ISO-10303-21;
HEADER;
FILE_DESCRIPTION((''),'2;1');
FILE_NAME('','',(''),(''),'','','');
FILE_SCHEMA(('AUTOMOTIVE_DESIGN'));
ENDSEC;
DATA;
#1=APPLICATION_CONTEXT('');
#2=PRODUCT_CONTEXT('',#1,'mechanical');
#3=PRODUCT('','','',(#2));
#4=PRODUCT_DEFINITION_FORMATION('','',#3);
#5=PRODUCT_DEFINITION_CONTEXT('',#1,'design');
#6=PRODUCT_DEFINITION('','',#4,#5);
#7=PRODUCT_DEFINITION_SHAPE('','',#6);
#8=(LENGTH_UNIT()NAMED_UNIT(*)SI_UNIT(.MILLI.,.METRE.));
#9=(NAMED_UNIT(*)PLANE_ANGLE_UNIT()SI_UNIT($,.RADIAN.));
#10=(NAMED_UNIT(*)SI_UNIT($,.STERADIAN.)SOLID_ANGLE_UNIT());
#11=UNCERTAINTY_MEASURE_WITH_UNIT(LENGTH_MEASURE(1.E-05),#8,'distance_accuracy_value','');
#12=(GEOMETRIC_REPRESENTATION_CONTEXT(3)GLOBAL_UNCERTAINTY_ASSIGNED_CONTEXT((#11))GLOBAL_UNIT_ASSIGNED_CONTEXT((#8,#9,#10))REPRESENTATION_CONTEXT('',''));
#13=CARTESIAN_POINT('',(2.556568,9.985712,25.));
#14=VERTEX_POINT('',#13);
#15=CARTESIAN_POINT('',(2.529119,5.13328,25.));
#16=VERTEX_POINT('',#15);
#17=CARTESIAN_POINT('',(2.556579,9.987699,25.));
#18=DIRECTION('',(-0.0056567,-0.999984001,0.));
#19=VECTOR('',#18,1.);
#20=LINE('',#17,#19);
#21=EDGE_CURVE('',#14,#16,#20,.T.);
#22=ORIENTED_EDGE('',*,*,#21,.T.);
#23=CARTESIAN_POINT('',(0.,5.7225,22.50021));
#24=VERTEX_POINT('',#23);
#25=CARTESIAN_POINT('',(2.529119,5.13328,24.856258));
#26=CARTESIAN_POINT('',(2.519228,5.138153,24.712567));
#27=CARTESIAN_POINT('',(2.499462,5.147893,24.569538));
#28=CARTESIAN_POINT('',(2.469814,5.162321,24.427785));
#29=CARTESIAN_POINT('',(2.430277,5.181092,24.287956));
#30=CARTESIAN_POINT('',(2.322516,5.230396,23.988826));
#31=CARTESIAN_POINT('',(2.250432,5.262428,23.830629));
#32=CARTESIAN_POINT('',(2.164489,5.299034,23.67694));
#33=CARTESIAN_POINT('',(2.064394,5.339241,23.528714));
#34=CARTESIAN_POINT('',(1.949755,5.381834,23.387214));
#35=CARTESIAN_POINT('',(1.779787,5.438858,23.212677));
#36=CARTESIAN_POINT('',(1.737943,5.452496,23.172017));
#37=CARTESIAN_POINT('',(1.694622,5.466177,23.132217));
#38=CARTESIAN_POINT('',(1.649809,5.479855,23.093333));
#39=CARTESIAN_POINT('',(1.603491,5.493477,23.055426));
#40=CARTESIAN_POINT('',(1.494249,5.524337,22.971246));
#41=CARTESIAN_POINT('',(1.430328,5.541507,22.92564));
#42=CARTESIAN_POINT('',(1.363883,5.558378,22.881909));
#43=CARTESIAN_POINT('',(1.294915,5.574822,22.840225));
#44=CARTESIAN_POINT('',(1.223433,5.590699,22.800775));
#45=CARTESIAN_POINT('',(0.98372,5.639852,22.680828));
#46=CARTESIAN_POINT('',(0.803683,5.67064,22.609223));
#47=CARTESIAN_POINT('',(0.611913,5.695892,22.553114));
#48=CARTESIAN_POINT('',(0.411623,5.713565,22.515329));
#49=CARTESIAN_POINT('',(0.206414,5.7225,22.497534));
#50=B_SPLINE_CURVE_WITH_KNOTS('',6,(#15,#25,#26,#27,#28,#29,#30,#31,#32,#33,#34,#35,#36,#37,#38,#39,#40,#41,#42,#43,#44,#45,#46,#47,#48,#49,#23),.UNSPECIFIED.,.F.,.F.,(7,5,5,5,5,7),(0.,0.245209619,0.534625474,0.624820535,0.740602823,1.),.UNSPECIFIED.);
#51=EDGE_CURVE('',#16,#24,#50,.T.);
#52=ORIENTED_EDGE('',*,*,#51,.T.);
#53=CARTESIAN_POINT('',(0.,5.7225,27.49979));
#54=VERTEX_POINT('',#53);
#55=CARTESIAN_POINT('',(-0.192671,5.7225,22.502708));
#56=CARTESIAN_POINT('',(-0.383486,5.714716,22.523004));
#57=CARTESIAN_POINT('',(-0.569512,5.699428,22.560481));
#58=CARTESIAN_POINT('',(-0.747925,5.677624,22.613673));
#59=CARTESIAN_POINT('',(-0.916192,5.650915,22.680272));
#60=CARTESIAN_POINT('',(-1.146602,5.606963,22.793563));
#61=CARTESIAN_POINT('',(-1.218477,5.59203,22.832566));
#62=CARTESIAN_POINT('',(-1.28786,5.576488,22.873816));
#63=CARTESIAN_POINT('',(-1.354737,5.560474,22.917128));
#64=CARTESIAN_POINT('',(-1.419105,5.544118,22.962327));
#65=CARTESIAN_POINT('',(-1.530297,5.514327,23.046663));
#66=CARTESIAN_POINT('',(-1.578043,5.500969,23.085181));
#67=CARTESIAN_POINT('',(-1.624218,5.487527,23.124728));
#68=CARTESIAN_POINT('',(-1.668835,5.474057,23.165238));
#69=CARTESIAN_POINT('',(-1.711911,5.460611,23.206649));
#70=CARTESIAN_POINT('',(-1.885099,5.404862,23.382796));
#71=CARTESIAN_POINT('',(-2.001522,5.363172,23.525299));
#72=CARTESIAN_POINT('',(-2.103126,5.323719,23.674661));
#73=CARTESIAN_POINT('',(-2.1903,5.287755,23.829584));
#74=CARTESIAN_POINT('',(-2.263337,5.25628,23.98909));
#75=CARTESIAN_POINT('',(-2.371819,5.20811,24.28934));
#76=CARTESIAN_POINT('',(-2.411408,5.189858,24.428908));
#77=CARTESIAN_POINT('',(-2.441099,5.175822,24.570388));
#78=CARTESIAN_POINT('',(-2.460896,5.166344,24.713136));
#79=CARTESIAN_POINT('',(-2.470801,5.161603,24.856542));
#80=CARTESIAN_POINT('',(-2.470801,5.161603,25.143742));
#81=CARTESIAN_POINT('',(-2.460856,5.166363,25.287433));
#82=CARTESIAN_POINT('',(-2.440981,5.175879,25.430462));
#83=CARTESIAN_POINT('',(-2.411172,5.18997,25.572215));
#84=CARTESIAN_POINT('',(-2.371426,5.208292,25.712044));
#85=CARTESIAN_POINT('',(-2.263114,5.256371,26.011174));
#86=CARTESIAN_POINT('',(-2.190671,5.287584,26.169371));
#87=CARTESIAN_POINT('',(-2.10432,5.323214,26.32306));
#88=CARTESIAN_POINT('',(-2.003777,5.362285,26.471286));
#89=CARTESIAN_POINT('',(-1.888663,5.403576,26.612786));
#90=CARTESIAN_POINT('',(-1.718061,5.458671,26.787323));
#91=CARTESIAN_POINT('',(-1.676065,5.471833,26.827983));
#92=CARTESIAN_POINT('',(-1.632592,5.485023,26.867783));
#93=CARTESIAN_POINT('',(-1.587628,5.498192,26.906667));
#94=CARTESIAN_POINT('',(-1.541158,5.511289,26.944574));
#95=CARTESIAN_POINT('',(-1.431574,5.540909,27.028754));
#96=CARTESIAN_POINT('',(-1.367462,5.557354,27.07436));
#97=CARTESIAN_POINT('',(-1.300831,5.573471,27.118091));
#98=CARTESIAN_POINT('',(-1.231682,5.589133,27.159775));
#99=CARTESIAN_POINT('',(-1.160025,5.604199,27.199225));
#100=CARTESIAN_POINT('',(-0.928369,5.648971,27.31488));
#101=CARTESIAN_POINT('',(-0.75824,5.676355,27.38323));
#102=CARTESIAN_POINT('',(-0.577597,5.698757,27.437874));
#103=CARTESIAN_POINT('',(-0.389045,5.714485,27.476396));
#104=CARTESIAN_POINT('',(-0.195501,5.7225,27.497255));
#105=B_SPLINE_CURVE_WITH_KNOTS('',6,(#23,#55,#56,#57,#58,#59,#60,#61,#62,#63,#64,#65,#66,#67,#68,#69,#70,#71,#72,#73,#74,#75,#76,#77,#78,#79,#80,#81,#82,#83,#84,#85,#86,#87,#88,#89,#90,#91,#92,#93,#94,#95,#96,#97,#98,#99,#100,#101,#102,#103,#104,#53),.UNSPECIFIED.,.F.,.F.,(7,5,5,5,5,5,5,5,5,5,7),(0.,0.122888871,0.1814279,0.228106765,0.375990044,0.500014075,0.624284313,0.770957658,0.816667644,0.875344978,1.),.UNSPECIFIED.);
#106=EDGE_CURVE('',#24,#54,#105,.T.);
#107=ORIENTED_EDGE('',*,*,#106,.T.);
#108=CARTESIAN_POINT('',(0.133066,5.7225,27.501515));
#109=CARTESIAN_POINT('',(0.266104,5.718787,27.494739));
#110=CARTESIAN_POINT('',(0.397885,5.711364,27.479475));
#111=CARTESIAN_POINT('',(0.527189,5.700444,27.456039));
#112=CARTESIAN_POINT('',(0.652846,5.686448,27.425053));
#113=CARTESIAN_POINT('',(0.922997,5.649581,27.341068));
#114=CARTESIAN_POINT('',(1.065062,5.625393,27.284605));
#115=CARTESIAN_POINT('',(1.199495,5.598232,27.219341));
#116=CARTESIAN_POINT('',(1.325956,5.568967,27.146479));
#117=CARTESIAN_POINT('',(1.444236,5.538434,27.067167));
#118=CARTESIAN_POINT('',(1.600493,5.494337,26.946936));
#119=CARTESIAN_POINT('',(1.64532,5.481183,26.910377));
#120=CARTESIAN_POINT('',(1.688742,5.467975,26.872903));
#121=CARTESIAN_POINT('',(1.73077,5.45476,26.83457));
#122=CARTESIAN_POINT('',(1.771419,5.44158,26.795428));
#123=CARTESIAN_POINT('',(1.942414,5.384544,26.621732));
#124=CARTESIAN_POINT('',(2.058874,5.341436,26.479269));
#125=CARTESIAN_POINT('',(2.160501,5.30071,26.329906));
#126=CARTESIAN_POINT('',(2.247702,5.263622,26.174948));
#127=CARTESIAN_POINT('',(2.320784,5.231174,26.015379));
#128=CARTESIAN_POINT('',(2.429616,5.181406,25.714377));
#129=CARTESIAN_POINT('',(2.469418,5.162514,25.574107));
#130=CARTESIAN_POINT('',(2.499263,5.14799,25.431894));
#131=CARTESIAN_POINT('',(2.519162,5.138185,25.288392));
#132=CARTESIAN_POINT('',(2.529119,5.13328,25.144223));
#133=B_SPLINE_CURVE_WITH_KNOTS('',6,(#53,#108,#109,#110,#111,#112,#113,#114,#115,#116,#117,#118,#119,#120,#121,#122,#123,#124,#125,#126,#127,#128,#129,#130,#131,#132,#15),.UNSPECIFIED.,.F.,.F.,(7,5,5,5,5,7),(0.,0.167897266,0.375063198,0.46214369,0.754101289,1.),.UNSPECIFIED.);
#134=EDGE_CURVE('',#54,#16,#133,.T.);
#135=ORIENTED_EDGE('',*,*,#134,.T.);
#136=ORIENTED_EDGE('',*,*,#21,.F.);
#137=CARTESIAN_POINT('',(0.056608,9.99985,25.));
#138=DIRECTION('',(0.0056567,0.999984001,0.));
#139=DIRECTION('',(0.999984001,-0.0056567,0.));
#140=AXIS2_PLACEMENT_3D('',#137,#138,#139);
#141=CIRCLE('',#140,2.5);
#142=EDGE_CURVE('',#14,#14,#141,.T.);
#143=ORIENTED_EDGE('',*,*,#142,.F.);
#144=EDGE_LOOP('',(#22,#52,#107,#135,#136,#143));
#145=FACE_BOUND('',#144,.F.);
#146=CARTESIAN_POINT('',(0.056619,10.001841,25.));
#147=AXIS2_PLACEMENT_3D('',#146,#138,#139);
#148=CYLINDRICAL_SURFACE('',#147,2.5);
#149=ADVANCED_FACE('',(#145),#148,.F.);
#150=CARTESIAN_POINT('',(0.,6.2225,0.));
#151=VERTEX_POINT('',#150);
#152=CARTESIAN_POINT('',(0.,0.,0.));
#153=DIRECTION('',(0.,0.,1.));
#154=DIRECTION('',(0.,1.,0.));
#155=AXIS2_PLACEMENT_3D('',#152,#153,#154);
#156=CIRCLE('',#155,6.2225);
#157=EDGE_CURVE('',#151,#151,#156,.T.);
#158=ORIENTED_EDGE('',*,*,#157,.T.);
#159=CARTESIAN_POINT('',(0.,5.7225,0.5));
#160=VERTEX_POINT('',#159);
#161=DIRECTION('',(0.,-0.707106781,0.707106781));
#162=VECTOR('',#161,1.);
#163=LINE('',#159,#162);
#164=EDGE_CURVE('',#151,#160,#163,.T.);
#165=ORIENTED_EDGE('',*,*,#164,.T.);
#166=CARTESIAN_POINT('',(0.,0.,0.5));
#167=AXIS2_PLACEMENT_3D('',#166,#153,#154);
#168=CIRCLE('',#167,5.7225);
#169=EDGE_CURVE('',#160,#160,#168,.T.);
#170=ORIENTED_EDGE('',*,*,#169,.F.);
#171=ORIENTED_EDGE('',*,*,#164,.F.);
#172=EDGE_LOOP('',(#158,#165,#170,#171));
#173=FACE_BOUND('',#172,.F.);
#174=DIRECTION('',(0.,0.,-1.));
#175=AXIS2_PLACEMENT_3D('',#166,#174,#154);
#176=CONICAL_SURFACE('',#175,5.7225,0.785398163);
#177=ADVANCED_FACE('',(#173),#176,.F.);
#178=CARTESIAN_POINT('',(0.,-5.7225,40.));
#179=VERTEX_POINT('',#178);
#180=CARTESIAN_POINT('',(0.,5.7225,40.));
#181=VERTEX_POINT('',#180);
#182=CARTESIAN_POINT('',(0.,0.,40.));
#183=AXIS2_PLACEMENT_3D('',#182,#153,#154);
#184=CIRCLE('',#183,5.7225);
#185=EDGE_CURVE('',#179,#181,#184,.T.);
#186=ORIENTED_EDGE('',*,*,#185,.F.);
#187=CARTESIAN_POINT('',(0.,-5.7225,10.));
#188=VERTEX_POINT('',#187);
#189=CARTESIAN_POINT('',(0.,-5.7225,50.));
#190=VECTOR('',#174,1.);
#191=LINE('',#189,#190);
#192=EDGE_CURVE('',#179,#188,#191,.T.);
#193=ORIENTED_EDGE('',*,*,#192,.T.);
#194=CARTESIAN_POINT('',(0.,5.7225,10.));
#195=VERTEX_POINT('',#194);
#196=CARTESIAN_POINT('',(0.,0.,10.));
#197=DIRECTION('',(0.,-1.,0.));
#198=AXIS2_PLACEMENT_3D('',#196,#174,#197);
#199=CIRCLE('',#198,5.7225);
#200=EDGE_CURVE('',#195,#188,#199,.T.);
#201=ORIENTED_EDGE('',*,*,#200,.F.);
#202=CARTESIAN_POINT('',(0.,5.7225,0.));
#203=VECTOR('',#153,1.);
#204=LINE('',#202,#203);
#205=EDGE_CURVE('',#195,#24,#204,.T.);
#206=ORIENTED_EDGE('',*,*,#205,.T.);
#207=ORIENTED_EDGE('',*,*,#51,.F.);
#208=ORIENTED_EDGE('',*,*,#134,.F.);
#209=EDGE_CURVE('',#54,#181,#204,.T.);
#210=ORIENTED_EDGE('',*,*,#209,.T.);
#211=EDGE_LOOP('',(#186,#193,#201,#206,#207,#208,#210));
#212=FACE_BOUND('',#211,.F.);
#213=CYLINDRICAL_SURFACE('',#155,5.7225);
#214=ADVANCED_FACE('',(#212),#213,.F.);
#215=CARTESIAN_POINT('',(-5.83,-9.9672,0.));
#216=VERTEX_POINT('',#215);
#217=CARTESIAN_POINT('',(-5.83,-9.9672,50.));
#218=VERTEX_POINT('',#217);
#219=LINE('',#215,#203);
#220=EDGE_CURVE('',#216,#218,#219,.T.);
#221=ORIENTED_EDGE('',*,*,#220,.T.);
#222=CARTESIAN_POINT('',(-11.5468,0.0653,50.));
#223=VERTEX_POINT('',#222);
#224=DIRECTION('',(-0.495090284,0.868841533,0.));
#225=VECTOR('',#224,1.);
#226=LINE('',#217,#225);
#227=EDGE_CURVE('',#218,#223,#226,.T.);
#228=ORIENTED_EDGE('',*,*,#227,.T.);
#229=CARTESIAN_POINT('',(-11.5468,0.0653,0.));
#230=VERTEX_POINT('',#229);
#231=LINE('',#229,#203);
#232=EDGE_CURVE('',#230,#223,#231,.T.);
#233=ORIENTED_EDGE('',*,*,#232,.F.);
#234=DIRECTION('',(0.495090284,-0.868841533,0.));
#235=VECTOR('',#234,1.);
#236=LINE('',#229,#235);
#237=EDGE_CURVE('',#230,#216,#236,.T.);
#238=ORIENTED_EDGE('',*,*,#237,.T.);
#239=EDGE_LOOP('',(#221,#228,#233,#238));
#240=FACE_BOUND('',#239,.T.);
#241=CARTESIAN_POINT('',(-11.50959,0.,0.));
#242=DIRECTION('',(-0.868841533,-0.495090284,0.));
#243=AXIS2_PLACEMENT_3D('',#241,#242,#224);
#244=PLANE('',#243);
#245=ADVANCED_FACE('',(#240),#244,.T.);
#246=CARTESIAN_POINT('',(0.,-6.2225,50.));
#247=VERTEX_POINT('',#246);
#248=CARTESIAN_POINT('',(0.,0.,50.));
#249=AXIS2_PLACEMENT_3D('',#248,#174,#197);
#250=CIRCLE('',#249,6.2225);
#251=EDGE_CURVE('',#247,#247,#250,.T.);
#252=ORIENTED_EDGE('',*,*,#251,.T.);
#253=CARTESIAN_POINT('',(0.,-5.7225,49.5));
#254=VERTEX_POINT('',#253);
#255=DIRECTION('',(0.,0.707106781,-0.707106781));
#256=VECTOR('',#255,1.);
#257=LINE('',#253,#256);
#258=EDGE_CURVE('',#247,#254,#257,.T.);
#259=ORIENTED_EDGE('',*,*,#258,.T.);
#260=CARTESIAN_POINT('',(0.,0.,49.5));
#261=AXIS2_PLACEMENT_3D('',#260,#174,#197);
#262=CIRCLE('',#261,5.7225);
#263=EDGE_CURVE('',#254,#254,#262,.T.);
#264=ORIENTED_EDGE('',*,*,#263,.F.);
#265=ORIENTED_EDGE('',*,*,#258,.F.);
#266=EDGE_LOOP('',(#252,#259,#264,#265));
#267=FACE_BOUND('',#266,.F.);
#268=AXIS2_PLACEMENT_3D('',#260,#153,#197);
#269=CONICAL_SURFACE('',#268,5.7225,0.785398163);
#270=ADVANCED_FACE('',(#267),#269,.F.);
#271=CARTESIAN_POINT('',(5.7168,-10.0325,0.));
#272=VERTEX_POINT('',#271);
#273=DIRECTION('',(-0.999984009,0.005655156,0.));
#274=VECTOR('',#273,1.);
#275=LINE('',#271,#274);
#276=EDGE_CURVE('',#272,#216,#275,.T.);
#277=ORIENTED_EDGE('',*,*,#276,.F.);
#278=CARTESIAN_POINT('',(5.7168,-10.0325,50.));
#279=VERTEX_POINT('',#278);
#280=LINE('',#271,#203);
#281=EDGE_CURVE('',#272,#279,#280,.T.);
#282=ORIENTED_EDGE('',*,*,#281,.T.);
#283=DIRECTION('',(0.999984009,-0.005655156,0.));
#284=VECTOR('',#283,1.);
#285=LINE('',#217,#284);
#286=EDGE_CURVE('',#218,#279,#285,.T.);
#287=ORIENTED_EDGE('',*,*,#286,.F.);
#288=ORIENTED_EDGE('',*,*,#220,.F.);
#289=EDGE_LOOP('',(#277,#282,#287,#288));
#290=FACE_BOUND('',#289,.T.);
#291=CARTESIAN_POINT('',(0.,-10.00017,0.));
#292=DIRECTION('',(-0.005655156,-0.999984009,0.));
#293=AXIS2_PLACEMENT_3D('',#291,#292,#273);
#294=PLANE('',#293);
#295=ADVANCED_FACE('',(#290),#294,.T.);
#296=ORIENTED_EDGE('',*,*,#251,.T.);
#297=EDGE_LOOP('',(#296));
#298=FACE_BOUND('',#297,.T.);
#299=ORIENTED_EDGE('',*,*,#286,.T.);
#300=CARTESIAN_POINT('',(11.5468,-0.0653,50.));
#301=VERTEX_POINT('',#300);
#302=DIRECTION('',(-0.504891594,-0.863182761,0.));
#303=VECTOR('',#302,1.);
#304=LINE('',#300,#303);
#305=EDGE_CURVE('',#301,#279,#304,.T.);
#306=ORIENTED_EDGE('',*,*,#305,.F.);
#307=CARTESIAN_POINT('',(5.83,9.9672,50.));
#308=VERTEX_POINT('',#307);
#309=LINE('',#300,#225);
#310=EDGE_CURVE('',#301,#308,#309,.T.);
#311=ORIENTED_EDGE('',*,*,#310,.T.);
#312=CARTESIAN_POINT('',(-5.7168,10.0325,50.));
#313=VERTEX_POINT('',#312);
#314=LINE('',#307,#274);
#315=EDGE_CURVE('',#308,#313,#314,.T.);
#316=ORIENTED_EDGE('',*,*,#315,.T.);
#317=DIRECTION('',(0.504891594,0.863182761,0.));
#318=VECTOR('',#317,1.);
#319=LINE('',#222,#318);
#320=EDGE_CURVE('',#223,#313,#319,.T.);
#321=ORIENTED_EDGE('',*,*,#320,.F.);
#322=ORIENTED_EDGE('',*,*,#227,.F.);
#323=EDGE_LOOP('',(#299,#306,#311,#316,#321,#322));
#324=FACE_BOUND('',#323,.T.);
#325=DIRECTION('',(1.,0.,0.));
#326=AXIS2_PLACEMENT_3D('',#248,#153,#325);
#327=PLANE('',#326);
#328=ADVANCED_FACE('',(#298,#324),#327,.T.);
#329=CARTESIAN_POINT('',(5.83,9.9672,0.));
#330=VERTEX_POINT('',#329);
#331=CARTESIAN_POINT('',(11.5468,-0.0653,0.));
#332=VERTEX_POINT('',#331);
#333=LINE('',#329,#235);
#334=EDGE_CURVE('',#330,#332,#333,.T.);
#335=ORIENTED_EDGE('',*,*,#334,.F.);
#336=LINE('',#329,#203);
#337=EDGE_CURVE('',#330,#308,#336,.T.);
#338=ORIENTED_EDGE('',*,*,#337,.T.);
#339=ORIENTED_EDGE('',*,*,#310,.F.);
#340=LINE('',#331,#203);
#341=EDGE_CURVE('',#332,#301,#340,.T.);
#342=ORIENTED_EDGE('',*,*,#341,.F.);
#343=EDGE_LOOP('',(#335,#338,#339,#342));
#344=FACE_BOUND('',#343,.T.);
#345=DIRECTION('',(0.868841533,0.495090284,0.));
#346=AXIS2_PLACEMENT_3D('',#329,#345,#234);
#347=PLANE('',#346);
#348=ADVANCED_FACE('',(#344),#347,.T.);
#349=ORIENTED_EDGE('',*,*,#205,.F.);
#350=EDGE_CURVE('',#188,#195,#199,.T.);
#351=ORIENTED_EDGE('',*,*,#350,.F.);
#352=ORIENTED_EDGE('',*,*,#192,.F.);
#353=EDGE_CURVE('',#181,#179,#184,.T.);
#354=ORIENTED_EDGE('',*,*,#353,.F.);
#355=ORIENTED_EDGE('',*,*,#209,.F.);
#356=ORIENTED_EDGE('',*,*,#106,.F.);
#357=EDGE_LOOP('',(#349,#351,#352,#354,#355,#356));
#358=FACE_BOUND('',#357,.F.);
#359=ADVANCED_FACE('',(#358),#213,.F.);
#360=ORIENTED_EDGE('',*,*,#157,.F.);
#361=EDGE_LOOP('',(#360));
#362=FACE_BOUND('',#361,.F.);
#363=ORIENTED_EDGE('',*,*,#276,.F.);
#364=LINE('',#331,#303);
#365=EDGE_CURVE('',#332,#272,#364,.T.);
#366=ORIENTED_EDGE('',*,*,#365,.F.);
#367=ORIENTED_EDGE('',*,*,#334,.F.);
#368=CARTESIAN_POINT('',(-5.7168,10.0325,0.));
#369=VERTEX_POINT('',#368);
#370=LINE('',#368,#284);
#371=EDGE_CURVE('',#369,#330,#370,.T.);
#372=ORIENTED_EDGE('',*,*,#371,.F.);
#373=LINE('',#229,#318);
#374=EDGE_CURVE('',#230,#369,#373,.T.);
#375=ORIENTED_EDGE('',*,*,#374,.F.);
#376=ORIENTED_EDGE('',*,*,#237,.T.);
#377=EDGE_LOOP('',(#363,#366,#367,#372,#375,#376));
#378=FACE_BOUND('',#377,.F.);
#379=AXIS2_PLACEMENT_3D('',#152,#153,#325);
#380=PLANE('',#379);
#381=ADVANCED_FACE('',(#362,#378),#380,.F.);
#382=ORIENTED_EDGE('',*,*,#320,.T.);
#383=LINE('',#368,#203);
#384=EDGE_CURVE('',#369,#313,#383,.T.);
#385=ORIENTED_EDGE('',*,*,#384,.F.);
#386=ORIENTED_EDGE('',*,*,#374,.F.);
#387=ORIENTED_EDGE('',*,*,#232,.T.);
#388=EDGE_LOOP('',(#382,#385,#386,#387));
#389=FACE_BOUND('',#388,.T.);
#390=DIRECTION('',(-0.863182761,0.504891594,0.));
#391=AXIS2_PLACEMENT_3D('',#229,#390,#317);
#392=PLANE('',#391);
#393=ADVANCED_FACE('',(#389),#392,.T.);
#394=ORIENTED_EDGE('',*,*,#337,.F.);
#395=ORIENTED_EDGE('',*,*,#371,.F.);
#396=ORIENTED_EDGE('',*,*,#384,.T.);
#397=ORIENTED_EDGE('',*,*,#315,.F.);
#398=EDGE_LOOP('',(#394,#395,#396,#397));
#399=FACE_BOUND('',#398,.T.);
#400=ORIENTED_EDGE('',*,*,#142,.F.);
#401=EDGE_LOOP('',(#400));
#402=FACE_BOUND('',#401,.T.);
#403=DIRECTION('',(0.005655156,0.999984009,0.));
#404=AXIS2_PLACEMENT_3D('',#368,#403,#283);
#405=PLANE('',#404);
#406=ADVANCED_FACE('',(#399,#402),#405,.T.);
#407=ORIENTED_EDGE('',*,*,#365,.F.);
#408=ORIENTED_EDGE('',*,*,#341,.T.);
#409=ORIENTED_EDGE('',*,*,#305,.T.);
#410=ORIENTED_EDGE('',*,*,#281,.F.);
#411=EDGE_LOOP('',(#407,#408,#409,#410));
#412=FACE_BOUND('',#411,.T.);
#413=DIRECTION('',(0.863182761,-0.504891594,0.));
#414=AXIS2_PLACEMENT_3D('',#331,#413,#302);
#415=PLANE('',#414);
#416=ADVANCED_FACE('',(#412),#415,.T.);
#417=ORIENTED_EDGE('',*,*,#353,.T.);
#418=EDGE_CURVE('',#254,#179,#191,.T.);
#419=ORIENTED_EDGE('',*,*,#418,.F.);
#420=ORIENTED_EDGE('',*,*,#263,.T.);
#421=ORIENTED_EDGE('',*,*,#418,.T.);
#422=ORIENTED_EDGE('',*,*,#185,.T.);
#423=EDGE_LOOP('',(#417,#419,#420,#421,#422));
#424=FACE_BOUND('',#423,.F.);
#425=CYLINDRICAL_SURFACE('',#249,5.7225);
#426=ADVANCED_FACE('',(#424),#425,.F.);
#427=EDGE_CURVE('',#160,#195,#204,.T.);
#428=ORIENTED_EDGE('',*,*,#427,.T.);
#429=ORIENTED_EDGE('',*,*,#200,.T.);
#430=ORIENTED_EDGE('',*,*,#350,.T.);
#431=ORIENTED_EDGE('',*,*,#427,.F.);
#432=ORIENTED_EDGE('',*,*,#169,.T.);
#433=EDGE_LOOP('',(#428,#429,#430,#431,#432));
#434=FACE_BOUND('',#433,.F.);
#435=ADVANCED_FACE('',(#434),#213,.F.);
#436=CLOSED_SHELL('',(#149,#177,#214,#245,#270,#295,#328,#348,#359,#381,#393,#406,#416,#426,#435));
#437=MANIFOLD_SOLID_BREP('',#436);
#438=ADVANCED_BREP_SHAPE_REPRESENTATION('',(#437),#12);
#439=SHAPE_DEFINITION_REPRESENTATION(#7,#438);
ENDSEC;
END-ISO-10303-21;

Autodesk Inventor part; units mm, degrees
ref_plane "YZ Plane" through (0, 0, 0) normal (1, 0, 0) x (0, 1, 0)
ref_plane "XZ Plane" through (0, 0, 0) normal (0, 1, 0) x (-1, 0, 0)
ref_plane "XY Plane" through (0, 0, 0) normal (0, 0, 1) x (1, 0, 0)
sketch "Skizze1" plane through (0, 0, 0) normal (0, 0, 1) x (1, 0, 0)
  line L0 (-16.1655, 0) -> (16.1655, 0) projected
  line L1 (0, -14.0455) -> (0, 14.0455) projected
  line L2 (-5.7168, 10.0325) -> (5.83, 9.9672)
  line L3 (5.83, 9.9672) -> (11.5468, -0.0653)
  line L4 (11.5468, -0.0653) -> (5.7168, -10.0325)
  line L5 (5.7168, -10.0325) -> (-5.83, -9.9672)
  line L6 (-5.83, -9.9672) -> (-11.5468, 0.0653)
  line L7 (-11.5468, 0.0653) -> (-5.7168, 10.0325)
  point P0 (0, 0)
  point P1 (0, 0)
  dimension "d0" = 20
extrude "Extrusion1" add sketch "Skizze1" along normal blind 50
sketch "Skizze2" plane through (-5.7168, 10.0325, 50) normal (0.0056567, 0.999984, 0) x (0.999984, -0.0056567, 0)
  line L0 (11.547, 0) -> (0, 0) projected
  circle A0 centre (5.7735, 25) radius 2.5
  point P0 (5.7735, 50)
  dimension "d3" = 25
  dimension "d4" = 5
extrude "Extrusion2" cut sketch "Skizze2" against normal blind 10
sketch "Skizze3" plane through (0, 0, 0) normal (0, 0, -1) x (-1, 0, 0)
  point P0 (0, 0)
hole "Bohrung1" at (0, 0, 0) direction (0, 0, 1) diameter 11.445 depth 40 thread size "G13.157x1.337" designation "G 1/4" standard "ISO Pipe Threads"
sketch "Skizze4" plane through (0, 0, 50) normal (0, 0, 1) x (1, 0, 0)
  point P0 (0, 0)
hole "Bohrung2" at (0, 0, 50) direction (0, 0, -1) diameter 11.445 depth 40 thread size "G13.157x1.337" designation "G 1/4" standard "ISO Pipe Threads"
chamfer "Fase1" distance 0.5 angle 45 1 edges at (0, -5.7225, 0)
chamfer "Fase2" distance 0.5 angle 45 1 edges at (0, 5.7225, 50)
sketch "Skizze5" plane through (0, 0, 50) normal (0, 0, 1) x (1, 0, 0)
  point P0 (0, 0)
properties part number "Luftregler1"
